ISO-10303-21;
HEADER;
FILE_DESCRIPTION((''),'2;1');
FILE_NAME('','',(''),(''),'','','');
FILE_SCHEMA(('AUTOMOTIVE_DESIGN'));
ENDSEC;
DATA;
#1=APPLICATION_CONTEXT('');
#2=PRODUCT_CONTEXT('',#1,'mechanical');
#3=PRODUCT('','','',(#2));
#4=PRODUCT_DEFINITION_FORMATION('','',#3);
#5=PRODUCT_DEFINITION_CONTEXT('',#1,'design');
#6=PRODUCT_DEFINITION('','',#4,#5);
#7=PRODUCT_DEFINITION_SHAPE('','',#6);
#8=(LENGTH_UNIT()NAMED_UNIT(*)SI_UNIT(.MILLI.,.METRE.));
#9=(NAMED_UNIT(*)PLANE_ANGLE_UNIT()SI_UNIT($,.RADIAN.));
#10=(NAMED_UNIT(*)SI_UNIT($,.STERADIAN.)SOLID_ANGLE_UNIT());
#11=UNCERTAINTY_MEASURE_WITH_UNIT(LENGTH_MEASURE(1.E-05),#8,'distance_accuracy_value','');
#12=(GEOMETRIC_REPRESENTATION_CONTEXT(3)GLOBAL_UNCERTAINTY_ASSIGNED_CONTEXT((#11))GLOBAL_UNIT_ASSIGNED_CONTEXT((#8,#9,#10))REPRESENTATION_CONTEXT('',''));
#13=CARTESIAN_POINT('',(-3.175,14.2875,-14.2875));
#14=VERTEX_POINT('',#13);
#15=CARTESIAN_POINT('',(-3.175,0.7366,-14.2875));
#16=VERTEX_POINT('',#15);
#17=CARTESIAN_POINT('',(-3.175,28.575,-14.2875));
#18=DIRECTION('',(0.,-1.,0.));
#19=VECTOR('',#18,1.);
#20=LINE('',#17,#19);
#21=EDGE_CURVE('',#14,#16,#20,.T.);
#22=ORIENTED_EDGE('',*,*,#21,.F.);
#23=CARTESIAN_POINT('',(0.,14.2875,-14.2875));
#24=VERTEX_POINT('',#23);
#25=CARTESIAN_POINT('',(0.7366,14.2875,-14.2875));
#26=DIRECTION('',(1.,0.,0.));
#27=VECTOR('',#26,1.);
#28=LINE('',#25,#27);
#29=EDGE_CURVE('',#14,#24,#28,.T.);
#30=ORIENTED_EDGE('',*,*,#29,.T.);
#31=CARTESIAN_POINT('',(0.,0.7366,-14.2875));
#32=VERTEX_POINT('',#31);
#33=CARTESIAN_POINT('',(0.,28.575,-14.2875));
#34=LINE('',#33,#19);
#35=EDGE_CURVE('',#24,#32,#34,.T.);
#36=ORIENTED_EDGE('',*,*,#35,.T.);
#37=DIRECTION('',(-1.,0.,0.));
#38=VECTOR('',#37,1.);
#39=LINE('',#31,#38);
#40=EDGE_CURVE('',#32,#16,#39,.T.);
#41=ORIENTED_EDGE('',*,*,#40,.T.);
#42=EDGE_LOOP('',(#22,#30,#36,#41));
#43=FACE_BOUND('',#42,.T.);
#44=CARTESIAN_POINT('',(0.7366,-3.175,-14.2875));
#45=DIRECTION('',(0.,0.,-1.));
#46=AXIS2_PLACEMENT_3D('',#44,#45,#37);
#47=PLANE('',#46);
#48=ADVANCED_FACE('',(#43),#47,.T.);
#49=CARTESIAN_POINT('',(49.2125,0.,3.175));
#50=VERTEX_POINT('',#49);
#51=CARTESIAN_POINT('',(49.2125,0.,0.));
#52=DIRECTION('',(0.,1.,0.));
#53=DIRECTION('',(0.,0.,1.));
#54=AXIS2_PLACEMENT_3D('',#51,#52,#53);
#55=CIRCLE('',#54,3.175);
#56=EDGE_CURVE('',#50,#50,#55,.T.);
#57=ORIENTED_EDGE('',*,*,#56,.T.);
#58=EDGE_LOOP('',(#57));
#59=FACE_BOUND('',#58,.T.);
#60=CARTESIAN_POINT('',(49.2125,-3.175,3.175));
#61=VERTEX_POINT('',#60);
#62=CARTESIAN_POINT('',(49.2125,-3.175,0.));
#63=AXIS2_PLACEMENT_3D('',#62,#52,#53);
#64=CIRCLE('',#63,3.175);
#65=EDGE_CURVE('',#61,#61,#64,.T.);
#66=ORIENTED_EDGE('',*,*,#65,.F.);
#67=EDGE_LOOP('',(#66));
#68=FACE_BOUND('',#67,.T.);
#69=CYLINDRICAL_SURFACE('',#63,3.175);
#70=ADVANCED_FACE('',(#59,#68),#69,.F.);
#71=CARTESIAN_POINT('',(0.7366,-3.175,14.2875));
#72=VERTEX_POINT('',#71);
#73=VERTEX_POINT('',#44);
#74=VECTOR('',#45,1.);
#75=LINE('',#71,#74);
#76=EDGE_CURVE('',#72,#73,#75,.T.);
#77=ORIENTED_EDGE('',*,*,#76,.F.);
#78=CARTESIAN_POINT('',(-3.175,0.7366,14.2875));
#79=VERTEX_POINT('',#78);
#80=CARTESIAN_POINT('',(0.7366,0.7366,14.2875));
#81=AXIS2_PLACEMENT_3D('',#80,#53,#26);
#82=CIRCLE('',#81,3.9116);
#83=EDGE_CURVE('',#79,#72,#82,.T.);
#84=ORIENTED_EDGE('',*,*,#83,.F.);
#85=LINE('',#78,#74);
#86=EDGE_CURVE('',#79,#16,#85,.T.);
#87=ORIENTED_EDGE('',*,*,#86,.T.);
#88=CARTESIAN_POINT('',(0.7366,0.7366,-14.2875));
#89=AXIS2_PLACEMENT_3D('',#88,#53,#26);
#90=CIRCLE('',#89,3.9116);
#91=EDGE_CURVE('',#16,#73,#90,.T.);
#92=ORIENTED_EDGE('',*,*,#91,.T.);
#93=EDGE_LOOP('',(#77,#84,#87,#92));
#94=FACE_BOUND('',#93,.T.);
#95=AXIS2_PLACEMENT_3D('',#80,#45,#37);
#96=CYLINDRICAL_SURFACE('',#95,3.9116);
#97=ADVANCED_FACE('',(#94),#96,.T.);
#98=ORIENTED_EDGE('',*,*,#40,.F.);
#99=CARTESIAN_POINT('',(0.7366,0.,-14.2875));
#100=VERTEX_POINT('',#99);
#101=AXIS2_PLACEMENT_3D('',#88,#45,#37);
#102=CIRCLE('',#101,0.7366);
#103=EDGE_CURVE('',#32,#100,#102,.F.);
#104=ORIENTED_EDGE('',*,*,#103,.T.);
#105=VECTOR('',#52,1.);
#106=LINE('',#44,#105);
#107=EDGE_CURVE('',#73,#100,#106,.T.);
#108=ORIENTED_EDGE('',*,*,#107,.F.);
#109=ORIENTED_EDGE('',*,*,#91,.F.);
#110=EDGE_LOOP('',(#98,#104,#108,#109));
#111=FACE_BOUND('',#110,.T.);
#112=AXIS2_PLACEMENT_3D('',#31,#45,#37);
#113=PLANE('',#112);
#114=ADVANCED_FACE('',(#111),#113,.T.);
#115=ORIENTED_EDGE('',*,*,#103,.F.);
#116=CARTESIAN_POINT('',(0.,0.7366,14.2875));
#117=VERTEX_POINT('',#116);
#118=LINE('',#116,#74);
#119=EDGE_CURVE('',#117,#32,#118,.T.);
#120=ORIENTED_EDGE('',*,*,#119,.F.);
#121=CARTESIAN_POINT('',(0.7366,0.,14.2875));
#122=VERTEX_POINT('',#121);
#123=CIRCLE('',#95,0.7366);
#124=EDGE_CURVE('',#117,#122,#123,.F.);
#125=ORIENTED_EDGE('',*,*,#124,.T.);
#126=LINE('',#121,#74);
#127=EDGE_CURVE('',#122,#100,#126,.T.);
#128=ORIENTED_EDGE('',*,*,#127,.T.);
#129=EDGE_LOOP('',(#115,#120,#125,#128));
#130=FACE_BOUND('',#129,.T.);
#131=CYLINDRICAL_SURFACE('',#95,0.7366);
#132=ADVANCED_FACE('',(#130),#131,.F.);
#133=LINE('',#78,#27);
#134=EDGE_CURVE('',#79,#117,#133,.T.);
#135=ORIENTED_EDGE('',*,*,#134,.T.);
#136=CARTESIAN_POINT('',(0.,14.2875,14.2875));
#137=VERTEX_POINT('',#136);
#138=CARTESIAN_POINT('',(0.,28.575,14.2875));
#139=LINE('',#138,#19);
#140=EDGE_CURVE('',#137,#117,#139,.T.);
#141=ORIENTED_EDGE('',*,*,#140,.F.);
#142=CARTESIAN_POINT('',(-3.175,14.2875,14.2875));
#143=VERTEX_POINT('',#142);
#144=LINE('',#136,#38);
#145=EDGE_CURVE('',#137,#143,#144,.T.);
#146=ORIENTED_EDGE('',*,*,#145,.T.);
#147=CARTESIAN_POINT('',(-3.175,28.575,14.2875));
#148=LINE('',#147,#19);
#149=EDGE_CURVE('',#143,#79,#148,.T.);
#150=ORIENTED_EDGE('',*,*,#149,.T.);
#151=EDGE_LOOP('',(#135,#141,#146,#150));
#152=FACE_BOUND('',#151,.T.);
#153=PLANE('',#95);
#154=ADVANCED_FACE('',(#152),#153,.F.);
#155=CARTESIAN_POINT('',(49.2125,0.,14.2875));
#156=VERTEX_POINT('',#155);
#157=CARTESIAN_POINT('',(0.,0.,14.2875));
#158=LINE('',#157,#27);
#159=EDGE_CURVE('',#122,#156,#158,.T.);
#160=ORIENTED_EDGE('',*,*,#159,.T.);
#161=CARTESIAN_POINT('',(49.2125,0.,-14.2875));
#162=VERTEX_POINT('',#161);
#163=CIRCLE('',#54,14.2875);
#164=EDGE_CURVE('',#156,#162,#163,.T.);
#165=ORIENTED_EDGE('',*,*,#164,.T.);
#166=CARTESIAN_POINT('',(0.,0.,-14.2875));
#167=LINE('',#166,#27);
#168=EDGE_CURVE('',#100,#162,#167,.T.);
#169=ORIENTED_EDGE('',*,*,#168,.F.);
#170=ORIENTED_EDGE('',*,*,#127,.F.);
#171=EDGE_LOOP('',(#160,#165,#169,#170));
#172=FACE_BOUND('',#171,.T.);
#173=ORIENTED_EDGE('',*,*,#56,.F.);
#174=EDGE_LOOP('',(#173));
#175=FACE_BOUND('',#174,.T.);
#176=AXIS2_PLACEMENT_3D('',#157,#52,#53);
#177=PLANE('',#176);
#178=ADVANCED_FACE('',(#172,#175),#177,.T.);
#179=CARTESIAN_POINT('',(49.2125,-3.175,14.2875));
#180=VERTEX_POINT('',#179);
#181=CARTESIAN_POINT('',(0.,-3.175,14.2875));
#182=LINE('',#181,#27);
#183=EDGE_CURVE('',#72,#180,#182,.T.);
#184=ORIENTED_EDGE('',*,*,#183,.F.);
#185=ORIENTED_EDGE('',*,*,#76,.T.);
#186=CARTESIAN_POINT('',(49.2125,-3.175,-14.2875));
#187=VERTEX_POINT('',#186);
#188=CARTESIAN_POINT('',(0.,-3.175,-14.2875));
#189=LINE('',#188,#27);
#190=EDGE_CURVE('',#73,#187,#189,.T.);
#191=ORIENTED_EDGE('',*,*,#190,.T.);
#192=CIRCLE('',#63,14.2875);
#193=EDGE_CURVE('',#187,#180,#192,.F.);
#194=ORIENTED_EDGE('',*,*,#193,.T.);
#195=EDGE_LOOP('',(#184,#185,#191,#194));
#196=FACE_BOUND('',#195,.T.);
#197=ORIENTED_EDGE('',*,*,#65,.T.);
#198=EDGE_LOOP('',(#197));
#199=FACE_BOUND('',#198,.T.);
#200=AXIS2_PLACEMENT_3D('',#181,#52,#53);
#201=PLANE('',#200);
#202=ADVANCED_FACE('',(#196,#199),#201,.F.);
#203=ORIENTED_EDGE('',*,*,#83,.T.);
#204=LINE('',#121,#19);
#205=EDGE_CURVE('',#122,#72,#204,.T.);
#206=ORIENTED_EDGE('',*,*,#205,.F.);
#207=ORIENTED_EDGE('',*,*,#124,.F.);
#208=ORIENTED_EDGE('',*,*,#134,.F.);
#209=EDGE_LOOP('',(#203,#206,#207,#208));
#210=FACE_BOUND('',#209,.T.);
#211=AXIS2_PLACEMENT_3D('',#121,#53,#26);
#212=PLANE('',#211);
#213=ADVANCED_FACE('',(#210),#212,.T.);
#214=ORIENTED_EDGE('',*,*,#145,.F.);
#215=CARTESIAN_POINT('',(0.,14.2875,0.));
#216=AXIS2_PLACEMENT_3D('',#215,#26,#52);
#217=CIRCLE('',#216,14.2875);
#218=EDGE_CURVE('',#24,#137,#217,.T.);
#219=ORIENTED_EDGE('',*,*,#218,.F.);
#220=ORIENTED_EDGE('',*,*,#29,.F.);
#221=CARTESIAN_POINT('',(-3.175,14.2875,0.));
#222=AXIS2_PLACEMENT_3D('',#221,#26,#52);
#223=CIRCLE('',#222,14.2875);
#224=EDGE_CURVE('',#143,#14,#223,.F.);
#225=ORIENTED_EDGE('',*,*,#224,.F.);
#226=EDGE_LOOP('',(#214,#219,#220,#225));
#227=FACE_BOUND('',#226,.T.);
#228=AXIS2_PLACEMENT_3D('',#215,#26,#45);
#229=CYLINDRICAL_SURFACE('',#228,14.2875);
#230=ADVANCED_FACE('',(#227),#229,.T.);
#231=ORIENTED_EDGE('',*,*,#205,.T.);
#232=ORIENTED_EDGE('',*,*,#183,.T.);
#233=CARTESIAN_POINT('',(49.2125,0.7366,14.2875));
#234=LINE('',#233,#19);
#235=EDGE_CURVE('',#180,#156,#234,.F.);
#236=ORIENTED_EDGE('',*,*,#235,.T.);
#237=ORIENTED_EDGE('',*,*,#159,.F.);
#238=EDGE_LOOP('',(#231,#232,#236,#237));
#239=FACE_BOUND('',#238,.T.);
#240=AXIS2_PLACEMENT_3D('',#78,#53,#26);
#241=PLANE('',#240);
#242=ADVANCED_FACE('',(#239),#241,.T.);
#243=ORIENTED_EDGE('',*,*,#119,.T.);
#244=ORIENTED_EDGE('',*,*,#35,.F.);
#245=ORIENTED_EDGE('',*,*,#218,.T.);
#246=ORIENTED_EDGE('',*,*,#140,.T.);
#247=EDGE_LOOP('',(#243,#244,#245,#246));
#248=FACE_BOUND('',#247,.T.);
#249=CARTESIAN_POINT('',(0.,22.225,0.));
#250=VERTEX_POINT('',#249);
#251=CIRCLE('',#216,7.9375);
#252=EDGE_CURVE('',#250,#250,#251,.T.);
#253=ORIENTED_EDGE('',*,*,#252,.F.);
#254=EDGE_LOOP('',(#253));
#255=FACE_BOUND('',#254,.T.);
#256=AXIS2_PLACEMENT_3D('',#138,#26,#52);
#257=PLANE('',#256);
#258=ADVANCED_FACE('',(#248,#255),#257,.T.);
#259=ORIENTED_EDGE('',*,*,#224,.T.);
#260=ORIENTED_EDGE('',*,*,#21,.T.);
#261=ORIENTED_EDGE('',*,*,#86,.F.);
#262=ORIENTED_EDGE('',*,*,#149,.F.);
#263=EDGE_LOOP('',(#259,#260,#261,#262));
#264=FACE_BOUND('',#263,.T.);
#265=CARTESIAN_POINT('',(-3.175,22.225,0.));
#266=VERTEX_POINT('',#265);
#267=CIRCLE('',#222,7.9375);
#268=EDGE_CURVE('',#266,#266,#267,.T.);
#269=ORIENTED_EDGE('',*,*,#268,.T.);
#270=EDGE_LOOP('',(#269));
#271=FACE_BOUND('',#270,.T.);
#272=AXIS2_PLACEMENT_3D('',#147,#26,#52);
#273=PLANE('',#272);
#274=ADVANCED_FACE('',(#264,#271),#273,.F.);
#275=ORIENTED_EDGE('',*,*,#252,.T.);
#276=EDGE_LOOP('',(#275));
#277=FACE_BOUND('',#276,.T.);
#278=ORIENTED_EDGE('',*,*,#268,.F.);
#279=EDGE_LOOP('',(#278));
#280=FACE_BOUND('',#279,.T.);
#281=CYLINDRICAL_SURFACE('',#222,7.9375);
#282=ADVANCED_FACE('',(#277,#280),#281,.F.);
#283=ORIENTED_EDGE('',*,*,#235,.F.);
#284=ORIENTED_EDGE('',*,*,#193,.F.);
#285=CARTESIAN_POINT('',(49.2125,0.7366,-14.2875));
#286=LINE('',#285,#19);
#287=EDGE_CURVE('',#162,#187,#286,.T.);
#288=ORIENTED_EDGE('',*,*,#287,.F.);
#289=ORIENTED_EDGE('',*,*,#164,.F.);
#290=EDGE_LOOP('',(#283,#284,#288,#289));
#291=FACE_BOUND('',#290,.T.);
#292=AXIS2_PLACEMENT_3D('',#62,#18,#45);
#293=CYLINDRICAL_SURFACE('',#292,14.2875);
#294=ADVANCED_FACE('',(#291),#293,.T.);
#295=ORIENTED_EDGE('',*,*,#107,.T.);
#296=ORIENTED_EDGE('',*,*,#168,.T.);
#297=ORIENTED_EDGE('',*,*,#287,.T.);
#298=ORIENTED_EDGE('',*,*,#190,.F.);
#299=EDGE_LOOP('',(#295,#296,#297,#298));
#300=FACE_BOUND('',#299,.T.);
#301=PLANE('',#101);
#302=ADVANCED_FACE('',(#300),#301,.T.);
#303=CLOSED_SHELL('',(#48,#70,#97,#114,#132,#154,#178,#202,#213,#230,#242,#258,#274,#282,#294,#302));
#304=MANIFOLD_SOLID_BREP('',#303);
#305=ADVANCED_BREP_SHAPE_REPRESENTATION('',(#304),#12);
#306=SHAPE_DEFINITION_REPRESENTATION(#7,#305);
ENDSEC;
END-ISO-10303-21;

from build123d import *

# Parameters (mm, degrees)
BASE_FLANGE1_DEPTH = 14.2875
SKETCH8_R          = 7.9375
CUT_EXTRUDE3_DEPTH = 72.083846838
SKETCH7_R          = 3.175
CUT_EXTRUDE2_DEPTH = 72.083846838
FILLET1_RADIUS     = 14.2875
FILLET1_LENGTH     = 3.175
FILLET2_RADIUS     = 14.2875
FILLET2_LENGTH     = 3.175


# Sheet-metal steps are written as plain solids
with BuildPart() as part:
    # Sketch1 → Base-Flange1 (new, symmetric)
    with BuildSketch(Plane.XY):
        with BuildLine():
            Line((0, 28.575), (0, 0.7366))
            ThreePointArc((0, 0.7366), (0.215745145, 0.215745145), (0.7366, 0))
            Line((0.7366, 0), (63.5, 0))
            Line((63.5, 0), (63.5, -3.175))
            Line((63.5, -3.175), (0.7366, -3.175))
            ThreePointArc((0.7366, -3.175), (-2.029318885, -2.029318885), (-3.175, 0.7366))
            Line((-3.175, 0.7366), (-3.175, 28.575))
            Line((-3.175, 28.575), (0, 28.575))
        make_face()
    extrude(amount=BASE_FLANGE1_DEPTH, both=True)

    # Sketch8 → Cut-Extrude3 (cut, through all)
    with BuildSketch(Plane(origin=(0, 0, 0), x_dir=(0, 0, -1), z_dir=(1, 0, 0))):
        with Locations(Location((0, 14.2875, 0), (0, 0, 90))):
            Circle(SKETCH8_R)
    extrude(amount=-CUT_EXTRUDE3_DEPTH, mode=Mode.SUBTRACT)

    # Sketch7 → Cut-Extrude2 (cut, through all)
    with BuildSketch(Plane(origin=(0, 0, 0), x_dir=(1, 0, 0), z_dir=(0, 1, 0))):
        with Locations(Location((49.2125, 0, 0), (0, 0, 270))):
            Circle(SKETCH7_R)
    extrude(amount=-CUT_EXTRUDE2_DEPTH, mode=Mode.SUBTRACT)

    # Fillet1: full round fillet: the end face becomes a half cylinder, R = half its width
    fillet1_face = Plane((63.5, -1.5875, 0), x_dir=(0, -1, 0), z_dir=(1, 0, 0))  # on the end face: x along it, z out of the body
    fillet1_slab = fillet1_face.offset(-FILLET1_RADIUS / 2) * Box(FILLET1_LENGTH, 2 * FILLET1_RADIUS, FILLET1_RADIUS, mode=Mode.PRIVATE)  # the body's end, R deep
    fillet1_round = Plane((49.2125, -1.5875, 0), x_dir=(1, 0, 0), z_dir=(0, -1, 0)) * Cylinder(FILLET1_RADIUS, FILLET1_LENGTH, mode=Mode.PRIVATE)  # its axis R under the face
    add(fillet1_slab - fillet1_round, mode=Mode.SUBTRACT)

    # Fillet2: full round fillet: the end face becomes a half cylinder, R = half its width
    fillet2_face = Plane((-1.5875, 28.575, 0), x_dir=(1, 0, 0), z_dir=(0, 1, 0))  # on the end face: x along it, z out of the body
    fillet2_slab = fillet2_face.offset(-FILLET2_RADIUS / 2) * Box(FILLET2_LENGTH, 2 * FILLET2_RADIUS, FILLET2_RADIUS, mode=Mode.PRIVATE)  # the body's end, R deep
    fillet2_round = Plane((-1.5875, 14.2875, 0), x_dir=(0, 1, 0), z_dir=(1, 0, 0)) * Cylinder(FILLET2_RADIUS, FILLET2_LENGTH, mode=Mode.PRIVATE)  # its axis R under the face
    add(fillet2_slab - fillet2_round, mode=Mode.SUBTRACT)


solid = part.part
